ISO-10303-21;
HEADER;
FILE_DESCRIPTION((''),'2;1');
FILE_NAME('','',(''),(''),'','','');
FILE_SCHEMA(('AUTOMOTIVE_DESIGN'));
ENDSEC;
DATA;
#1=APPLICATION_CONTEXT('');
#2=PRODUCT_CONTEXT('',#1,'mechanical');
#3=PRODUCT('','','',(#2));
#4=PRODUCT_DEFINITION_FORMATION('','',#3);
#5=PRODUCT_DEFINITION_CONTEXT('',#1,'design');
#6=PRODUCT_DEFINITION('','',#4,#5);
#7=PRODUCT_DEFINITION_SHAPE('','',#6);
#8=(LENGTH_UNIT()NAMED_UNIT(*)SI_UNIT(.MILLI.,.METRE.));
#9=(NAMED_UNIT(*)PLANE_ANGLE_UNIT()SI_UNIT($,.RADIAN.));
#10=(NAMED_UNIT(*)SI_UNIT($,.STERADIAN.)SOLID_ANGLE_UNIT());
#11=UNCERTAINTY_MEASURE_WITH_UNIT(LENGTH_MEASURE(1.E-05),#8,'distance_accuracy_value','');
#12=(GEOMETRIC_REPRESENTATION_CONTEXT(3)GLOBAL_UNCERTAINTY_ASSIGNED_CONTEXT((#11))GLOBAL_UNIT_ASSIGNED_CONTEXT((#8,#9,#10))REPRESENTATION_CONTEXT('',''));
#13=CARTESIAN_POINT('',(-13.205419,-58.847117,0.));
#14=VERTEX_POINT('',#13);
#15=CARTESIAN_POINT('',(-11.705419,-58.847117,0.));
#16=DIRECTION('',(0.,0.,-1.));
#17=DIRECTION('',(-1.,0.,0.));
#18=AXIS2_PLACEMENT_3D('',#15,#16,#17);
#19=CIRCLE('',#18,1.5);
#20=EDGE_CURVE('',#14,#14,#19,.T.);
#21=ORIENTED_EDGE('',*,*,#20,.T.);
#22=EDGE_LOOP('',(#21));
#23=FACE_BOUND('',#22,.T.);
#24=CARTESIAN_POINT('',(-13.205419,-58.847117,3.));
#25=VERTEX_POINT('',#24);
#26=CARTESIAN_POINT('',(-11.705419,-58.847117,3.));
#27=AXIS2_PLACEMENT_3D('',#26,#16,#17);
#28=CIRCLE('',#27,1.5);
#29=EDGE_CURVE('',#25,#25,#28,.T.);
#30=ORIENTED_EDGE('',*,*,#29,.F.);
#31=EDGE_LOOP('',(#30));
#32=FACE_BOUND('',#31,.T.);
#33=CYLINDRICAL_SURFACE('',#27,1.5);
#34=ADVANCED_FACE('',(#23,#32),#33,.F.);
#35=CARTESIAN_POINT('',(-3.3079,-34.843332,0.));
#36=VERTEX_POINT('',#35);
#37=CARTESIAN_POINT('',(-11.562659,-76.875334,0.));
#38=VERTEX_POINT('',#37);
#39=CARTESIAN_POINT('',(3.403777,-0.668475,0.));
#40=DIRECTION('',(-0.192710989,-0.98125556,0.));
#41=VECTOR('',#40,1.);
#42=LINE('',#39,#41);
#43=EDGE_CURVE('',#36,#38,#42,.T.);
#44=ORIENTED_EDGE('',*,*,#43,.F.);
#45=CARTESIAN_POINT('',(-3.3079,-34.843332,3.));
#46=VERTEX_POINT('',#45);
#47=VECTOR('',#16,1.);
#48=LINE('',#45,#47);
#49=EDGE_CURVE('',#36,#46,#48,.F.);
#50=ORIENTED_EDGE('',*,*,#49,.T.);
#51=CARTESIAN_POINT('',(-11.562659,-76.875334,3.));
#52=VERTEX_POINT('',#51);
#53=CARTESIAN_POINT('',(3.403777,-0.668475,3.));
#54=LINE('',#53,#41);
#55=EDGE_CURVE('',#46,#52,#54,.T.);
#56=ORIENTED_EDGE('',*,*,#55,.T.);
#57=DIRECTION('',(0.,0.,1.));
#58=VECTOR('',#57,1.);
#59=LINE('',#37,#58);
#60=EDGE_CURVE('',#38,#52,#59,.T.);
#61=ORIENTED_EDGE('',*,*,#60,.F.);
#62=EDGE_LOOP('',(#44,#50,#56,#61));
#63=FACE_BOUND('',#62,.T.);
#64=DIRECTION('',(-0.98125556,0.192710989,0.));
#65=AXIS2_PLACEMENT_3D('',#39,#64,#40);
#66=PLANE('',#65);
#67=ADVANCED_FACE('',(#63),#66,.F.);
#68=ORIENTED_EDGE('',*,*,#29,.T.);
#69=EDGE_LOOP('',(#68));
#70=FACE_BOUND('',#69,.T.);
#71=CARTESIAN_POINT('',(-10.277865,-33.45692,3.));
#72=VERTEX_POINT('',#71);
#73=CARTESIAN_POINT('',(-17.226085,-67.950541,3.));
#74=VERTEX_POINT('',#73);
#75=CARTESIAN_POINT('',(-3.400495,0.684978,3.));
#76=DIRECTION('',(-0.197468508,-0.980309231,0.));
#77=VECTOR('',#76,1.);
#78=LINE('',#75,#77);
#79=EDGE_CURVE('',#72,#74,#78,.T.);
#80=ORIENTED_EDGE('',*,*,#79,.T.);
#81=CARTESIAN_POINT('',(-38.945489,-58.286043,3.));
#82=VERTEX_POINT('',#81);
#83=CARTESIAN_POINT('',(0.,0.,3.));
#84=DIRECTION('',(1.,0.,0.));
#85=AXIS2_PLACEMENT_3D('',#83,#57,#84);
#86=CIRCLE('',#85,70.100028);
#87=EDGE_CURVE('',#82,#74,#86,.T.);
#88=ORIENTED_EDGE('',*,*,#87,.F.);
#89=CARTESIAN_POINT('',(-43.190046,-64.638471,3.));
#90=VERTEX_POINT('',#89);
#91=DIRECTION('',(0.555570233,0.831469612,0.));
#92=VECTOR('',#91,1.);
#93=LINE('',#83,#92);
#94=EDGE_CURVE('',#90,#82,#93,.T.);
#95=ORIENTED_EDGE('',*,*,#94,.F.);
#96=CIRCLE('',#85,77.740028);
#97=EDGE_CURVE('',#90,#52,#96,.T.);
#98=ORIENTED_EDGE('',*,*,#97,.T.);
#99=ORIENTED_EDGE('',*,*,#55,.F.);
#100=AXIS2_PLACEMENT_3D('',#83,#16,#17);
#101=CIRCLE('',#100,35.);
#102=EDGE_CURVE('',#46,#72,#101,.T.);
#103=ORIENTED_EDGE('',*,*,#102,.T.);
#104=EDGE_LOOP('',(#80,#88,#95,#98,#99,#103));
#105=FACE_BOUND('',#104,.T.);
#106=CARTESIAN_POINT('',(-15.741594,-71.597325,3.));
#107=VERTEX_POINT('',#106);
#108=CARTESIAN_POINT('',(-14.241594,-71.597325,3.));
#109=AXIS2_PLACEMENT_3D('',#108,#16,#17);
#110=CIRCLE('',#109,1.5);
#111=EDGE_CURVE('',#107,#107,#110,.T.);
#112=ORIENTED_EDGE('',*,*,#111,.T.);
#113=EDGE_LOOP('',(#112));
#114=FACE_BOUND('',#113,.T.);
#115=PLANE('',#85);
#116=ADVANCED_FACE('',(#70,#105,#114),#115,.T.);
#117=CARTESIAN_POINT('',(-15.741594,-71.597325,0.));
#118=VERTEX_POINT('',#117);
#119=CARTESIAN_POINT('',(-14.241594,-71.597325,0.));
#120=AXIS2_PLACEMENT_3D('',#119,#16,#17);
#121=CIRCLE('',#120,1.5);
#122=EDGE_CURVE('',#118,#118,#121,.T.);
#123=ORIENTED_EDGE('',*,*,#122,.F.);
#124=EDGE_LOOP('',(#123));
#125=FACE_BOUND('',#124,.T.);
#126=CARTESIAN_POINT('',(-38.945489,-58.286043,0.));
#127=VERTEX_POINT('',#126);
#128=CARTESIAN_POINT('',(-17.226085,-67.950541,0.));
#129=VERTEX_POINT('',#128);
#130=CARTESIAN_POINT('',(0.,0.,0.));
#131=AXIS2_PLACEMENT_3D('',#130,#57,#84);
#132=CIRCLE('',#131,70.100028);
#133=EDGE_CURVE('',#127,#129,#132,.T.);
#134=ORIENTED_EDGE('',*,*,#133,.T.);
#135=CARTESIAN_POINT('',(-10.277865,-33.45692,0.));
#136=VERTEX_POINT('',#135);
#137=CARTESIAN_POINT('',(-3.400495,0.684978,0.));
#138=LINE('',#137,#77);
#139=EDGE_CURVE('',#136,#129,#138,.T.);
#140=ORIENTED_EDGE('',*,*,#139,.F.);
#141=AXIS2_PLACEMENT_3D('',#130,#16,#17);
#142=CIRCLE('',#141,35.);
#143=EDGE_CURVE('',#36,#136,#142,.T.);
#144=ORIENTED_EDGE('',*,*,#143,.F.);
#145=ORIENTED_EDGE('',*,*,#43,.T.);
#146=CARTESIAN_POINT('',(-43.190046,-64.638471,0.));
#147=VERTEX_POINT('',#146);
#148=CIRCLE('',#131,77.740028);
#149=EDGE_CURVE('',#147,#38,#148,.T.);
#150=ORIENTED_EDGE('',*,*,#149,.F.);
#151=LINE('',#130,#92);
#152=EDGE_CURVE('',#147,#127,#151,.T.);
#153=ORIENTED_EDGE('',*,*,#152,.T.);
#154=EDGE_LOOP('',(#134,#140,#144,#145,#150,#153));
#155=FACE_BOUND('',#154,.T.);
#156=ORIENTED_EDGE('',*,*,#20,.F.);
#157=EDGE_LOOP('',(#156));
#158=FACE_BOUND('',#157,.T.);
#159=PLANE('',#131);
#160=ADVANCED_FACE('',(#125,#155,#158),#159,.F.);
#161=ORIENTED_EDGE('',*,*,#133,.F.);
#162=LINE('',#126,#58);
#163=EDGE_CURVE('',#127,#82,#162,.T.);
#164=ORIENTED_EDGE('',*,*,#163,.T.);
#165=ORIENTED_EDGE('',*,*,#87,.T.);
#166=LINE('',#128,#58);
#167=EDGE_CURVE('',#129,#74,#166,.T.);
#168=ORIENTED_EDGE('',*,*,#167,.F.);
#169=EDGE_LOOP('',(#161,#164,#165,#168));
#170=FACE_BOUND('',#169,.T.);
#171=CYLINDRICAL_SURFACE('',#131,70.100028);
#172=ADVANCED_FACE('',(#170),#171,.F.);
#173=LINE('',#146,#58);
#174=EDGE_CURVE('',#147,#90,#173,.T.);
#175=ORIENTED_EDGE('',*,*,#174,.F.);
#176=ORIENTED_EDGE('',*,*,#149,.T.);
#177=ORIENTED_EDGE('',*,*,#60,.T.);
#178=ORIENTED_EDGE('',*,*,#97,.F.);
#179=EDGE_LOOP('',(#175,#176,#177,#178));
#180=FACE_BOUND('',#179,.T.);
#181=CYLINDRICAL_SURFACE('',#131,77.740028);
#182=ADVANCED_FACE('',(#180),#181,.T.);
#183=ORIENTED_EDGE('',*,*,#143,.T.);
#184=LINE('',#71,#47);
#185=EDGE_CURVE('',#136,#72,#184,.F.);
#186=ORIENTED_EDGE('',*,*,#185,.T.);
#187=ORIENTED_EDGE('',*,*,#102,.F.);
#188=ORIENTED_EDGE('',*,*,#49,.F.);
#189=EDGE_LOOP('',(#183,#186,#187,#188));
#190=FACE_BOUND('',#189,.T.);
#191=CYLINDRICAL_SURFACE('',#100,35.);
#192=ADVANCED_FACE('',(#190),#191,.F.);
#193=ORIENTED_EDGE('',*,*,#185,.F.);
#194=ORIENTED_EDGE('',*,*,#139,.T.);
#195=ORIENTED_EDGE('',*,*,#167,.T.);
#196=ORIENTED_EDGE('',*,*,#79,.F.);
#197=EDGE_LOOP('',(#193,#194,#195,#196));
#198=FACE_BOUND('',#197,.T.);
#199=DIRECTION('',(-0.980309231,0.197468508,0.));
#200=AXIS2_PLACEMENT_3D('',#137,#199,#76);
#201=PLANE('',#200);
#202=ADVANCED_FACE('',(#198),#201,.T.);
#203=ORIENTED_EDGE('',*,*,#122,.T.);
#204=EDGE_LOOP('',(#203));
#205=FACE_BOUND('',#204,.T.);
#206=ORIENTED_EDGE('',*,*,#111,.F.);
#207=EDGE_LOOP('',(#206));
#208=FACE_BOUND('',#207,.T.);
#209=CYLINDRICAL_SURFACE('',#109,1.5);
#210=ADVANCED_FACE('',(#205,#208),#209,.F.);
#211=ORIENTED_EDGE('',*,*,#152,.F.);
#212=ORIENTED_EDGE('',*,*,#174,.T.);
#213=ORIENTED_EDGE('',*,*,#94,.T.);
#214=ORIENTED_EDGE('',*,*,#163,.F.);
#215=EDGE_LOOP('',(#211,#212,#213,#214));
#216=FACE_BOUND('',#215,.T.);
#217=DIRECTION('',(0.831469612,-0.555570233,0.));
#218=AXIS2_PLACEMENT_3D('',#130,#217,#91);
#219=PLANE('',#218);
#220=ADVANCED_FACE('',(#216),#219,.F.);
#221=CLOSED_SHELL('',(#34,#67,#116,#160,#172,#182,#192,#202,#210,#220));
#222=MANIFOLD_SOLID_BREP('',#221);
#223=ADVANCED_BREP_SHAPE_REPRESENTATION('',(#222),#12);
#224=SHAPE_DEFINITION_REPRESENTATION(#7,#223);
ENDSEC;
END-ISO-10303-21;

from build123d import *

# Parameters (mm, degrees)
SKETCH_1_R          = 18
LASHENA_DEPTH       = 3
CUT_EXTRUDEA_DEPTH  = 3
WWW_KYTOOL_CN_COUNT = 16
SKETCH_3_R          = 1.5
CUT_EXTRUDE_2_DEPTH = 10
SKETCH_4_R          = 1.5
CUT_EXTRUDE_3_DEPTH = 10
EXTRUDE_1_DEPTH     = 3
SKETCH_6_R          = 1.5
CUT_EXTRUDE_4_DEPTH = 3
SKETCH_7_R          = 35
CUT_EXTRUDE_5_DEPTH = 3


with BuildPart() as part:
    # 草图1 → LaShenA (new body)
    with BuildSketch(Plane.XY):
        Circle(SKETCH_1_R)
    extrude(amount=LASHENA_DEPTH)

    # SketchA → Cut-ExtrudeA (cut)
    with BuildSketch(Plane.XY.offset(3)):
        with BuildLine():
            ThreePointArc((0.423212707, 13.493364703), (0, 13.5), (-0.423212707, 13.493364703))
            ThreePointArc((-0.423212707, 13.493364703), (-0.952770902, 13.685686791), (-1.20440395, 14.18977059))
            add(Edge.make_bspline(
                [(-1.20440395, 14.18977059), (-1.226562505, 14.455224305), (-1.213843633, 14.773889884), (-1.273675597, 15.110607864), (-1.299119688, 15.21139578), (-1.321432077, 15.29109757), (-1.349914152, 15.382250837), (-1.385146673, 15.484587535), (-1.427834192, 15.597770763), (-1.478623281, 15.721446817), (-1.538159915, 15.855229004), (-1.607069773, 15.998703507), (-1.685962928, 16.151428337), (-1.775430978, 16.312934487), (-1.876046532, 16.482726463), (-1.98836201, 16.660283053), (-2.112908684, 16.845058076), (-2.250195688, 17.036481179), (-2.400709063, 17.233958676), (-2.56491084, 17.43687441), (-2.743238138, 17.644590662), (-2.936102365, 17.856449073), (-3.14388814, 18.07177164), (-3.447378451, 18.368492697), (-3.689495989, 18.585006365), (-3.858042439, 18.727457792)],
                knots=[0.122308221, 0.122308221, 0.122308221, 0.122308221, 0.250610689, 0.276296194, 0.287604067, 0.300967916, 0.316387742, 0.333863545, 0.353395324, 0.37498308, 0.398626813, 0.424326522, 0.452082207, 0.48189387, 0.513761509, 0.547685125, 0.583664717, 0.621700286, 0.661791832, 0.703939355, 0.748142854, 0.79440233, 0.842717782, 0.893089212, 1, 1, 1, 1], degree=3))
            ThreePointArc((-3.858042439, 18.727457792), (0, 19.120726106), (3.858042439, 18.727457792))
            add(Edge.make_bspline(
                [(1.20440395, 14.18977059), (1.226562505, 14.455224305), (1.213843633, 14.773889884), (1.273675597, 15.110607864), (1.299119688, 15.21139578), (1.321432077, 15.29109757), (1.349914152, 15.382250837), (1.385146673, 15.484587535), (1.427834192, 15.597770763), (1.478623281, 15.721446817), (1.538159915, 15.855229004), (1.607069773, 15.998703507), (1.685962928, 16.151428337), (1.775430978, 16.312934487), (1.876046532, 16.482726463), (1.98836201, 16.660283053), (2.112908684, 16.845058076), (2.250195688, 17.036481179), (2.400709063, 17.233958676), (2.56491084, 17.43687441), (2.743238138, 17.644590662), (2.936102365, 17.856449073), (3.14388814, 18.07177164), (3.447378451, 18.368492697), (3.689495989, 18.585006365), (3.858042439, 18.727457792)],
                knots=[0.122308221, 0.122308221, 0.122308221, 0.122308221, 0.250610689, 0.276296194, 0.287604067, 0.300967916, 0.316387742, 0.333863545, 0.353395324, 0.37498308, 0.398626813, 0.424326522, 0.452082207, 0.48189387, 0.513761509, 0.547685125, 0.583664717, 0.621700286, 0.661791832, 0.703939355, 0.748142854, 0.79440233, 0.842717782, 0.893089212, 1, 1, 1, 1], degree=3))
            ThreePointArc((1.20440395, 14.18977059), (0.952770902, 13.685686791), (0.423212707, 13.493364703))
        make_face()
    cut_extrudea = extrude(amount=-CUT_EXTRUDEA_DEPTH, mode=Mode.SUBTRACT)

    # www.KYTool.cn: Cut-ExtrudeA ×16 about axis
    www_kytool_cn_axis = Axis((0, 0, -80.9), (0, 0, 1))
    for i in range(1, WWW_KYTOOL_CN_COUNT):
        add(cut_extrudea.rotate(www_kytool_cn_axis, i * 360 / WWW_KYTOOL_CN_COUNT), mode=Mode.SUBTRACT)

    # 草图3 → 切除-拉伸2 (cut)
    with BuildSketch(Plane(origin=(0, 0, 0), x_dir=(-1, 0, 0), z_dir=(0, 0, -1))):
        Circle(SKETCH_3_R)
    extrude(amount=-CUT_EXTRUDE_2_DEPTH, mode=Mode.SUBTRACT)

    # 草图4 → 切除-拉伸3 (cut)
    with BuildSketch(Plane(origin=(0, 0, 0), x_dir=(-1, 0, 0), z_dir=(0, 0, -1))):
        with Locations((5, 0)):
            Circle(SKETCH_4_R)
        with Locations((0, -5)):
            Circle(SKETCH_4_R)
        with Locations((-5, 0)):
            Circle(SKETCH_4_R)
        with Locations((0, 5)):
            Circle(SKETCH_4_R)
    extrude(amount=-CUT_EXTRUDE_3_DEPTH, mode=Mode.SUBTRACT)

    # 草图5 → 凸台-拉伸1 (add)
    with BuildSketch(Plane.XY.offset(3)):
        with BuildLine():
            Line((-3.48199852, -8.406288052), (-6.888301783, -16.629831585))
            Line((-6.888301783, -16.629831585), (-17.226084522, -67.950540756))
            ThreePointArc((-17.226084522, -67.950540756), (-28.498456938, -64.045701878), (-38.945489094, -58.286043408))
            Line((-38.945489094, -58.286043408), (-43.190045675, -64.638471246))
            ThreePointArc((-43.190045675, -64.638471246), (-28.051735714, -72.502497432), (-11.562659331, -76.875333623))
            Line((-11.562659331, -76.875333623), (0, -18))
            Line((0, -18), (0, -9.09890062))
            ThreePointArc((0, -9.09890062), (-1.775107452, -8.924067796), (-3.48199852, -8.406288052))
        make_face()
    extrude(amount=-EXTRUDE_1_DEPTH)

    # 草图6 → 切除-拉伸4 (cut)
    with BuildSketch(Plane(origin=(0, 0, 0), x_dir=(-1, 0, 0), z_dir=(0, 0, -1))):
        with Locations((14.241593507, -71.597325469)):
            Circle(SKETCH_6_R)
        with Locations((11.705419321, -58.847116824)):
            Circle(SKETCH_6_R)
    extrude(amount=-CUT_EXTRUDE_4_DEPTH, mode=Mode.SUBTRACT)

    # 草图7 → 切除-拉伸5 (cut)
    with BuildSketch(Plane(origin=(0, 0, 0), x_dir=(-1, 0, 0), z_dir=(0, 0, -1))):
        Circle(SKETCH_7_R)
    extrude(amount=-CUT_EXTRUDE_5_DEPTH, mode=Mode.SUBTRACT)


solid = part.part
